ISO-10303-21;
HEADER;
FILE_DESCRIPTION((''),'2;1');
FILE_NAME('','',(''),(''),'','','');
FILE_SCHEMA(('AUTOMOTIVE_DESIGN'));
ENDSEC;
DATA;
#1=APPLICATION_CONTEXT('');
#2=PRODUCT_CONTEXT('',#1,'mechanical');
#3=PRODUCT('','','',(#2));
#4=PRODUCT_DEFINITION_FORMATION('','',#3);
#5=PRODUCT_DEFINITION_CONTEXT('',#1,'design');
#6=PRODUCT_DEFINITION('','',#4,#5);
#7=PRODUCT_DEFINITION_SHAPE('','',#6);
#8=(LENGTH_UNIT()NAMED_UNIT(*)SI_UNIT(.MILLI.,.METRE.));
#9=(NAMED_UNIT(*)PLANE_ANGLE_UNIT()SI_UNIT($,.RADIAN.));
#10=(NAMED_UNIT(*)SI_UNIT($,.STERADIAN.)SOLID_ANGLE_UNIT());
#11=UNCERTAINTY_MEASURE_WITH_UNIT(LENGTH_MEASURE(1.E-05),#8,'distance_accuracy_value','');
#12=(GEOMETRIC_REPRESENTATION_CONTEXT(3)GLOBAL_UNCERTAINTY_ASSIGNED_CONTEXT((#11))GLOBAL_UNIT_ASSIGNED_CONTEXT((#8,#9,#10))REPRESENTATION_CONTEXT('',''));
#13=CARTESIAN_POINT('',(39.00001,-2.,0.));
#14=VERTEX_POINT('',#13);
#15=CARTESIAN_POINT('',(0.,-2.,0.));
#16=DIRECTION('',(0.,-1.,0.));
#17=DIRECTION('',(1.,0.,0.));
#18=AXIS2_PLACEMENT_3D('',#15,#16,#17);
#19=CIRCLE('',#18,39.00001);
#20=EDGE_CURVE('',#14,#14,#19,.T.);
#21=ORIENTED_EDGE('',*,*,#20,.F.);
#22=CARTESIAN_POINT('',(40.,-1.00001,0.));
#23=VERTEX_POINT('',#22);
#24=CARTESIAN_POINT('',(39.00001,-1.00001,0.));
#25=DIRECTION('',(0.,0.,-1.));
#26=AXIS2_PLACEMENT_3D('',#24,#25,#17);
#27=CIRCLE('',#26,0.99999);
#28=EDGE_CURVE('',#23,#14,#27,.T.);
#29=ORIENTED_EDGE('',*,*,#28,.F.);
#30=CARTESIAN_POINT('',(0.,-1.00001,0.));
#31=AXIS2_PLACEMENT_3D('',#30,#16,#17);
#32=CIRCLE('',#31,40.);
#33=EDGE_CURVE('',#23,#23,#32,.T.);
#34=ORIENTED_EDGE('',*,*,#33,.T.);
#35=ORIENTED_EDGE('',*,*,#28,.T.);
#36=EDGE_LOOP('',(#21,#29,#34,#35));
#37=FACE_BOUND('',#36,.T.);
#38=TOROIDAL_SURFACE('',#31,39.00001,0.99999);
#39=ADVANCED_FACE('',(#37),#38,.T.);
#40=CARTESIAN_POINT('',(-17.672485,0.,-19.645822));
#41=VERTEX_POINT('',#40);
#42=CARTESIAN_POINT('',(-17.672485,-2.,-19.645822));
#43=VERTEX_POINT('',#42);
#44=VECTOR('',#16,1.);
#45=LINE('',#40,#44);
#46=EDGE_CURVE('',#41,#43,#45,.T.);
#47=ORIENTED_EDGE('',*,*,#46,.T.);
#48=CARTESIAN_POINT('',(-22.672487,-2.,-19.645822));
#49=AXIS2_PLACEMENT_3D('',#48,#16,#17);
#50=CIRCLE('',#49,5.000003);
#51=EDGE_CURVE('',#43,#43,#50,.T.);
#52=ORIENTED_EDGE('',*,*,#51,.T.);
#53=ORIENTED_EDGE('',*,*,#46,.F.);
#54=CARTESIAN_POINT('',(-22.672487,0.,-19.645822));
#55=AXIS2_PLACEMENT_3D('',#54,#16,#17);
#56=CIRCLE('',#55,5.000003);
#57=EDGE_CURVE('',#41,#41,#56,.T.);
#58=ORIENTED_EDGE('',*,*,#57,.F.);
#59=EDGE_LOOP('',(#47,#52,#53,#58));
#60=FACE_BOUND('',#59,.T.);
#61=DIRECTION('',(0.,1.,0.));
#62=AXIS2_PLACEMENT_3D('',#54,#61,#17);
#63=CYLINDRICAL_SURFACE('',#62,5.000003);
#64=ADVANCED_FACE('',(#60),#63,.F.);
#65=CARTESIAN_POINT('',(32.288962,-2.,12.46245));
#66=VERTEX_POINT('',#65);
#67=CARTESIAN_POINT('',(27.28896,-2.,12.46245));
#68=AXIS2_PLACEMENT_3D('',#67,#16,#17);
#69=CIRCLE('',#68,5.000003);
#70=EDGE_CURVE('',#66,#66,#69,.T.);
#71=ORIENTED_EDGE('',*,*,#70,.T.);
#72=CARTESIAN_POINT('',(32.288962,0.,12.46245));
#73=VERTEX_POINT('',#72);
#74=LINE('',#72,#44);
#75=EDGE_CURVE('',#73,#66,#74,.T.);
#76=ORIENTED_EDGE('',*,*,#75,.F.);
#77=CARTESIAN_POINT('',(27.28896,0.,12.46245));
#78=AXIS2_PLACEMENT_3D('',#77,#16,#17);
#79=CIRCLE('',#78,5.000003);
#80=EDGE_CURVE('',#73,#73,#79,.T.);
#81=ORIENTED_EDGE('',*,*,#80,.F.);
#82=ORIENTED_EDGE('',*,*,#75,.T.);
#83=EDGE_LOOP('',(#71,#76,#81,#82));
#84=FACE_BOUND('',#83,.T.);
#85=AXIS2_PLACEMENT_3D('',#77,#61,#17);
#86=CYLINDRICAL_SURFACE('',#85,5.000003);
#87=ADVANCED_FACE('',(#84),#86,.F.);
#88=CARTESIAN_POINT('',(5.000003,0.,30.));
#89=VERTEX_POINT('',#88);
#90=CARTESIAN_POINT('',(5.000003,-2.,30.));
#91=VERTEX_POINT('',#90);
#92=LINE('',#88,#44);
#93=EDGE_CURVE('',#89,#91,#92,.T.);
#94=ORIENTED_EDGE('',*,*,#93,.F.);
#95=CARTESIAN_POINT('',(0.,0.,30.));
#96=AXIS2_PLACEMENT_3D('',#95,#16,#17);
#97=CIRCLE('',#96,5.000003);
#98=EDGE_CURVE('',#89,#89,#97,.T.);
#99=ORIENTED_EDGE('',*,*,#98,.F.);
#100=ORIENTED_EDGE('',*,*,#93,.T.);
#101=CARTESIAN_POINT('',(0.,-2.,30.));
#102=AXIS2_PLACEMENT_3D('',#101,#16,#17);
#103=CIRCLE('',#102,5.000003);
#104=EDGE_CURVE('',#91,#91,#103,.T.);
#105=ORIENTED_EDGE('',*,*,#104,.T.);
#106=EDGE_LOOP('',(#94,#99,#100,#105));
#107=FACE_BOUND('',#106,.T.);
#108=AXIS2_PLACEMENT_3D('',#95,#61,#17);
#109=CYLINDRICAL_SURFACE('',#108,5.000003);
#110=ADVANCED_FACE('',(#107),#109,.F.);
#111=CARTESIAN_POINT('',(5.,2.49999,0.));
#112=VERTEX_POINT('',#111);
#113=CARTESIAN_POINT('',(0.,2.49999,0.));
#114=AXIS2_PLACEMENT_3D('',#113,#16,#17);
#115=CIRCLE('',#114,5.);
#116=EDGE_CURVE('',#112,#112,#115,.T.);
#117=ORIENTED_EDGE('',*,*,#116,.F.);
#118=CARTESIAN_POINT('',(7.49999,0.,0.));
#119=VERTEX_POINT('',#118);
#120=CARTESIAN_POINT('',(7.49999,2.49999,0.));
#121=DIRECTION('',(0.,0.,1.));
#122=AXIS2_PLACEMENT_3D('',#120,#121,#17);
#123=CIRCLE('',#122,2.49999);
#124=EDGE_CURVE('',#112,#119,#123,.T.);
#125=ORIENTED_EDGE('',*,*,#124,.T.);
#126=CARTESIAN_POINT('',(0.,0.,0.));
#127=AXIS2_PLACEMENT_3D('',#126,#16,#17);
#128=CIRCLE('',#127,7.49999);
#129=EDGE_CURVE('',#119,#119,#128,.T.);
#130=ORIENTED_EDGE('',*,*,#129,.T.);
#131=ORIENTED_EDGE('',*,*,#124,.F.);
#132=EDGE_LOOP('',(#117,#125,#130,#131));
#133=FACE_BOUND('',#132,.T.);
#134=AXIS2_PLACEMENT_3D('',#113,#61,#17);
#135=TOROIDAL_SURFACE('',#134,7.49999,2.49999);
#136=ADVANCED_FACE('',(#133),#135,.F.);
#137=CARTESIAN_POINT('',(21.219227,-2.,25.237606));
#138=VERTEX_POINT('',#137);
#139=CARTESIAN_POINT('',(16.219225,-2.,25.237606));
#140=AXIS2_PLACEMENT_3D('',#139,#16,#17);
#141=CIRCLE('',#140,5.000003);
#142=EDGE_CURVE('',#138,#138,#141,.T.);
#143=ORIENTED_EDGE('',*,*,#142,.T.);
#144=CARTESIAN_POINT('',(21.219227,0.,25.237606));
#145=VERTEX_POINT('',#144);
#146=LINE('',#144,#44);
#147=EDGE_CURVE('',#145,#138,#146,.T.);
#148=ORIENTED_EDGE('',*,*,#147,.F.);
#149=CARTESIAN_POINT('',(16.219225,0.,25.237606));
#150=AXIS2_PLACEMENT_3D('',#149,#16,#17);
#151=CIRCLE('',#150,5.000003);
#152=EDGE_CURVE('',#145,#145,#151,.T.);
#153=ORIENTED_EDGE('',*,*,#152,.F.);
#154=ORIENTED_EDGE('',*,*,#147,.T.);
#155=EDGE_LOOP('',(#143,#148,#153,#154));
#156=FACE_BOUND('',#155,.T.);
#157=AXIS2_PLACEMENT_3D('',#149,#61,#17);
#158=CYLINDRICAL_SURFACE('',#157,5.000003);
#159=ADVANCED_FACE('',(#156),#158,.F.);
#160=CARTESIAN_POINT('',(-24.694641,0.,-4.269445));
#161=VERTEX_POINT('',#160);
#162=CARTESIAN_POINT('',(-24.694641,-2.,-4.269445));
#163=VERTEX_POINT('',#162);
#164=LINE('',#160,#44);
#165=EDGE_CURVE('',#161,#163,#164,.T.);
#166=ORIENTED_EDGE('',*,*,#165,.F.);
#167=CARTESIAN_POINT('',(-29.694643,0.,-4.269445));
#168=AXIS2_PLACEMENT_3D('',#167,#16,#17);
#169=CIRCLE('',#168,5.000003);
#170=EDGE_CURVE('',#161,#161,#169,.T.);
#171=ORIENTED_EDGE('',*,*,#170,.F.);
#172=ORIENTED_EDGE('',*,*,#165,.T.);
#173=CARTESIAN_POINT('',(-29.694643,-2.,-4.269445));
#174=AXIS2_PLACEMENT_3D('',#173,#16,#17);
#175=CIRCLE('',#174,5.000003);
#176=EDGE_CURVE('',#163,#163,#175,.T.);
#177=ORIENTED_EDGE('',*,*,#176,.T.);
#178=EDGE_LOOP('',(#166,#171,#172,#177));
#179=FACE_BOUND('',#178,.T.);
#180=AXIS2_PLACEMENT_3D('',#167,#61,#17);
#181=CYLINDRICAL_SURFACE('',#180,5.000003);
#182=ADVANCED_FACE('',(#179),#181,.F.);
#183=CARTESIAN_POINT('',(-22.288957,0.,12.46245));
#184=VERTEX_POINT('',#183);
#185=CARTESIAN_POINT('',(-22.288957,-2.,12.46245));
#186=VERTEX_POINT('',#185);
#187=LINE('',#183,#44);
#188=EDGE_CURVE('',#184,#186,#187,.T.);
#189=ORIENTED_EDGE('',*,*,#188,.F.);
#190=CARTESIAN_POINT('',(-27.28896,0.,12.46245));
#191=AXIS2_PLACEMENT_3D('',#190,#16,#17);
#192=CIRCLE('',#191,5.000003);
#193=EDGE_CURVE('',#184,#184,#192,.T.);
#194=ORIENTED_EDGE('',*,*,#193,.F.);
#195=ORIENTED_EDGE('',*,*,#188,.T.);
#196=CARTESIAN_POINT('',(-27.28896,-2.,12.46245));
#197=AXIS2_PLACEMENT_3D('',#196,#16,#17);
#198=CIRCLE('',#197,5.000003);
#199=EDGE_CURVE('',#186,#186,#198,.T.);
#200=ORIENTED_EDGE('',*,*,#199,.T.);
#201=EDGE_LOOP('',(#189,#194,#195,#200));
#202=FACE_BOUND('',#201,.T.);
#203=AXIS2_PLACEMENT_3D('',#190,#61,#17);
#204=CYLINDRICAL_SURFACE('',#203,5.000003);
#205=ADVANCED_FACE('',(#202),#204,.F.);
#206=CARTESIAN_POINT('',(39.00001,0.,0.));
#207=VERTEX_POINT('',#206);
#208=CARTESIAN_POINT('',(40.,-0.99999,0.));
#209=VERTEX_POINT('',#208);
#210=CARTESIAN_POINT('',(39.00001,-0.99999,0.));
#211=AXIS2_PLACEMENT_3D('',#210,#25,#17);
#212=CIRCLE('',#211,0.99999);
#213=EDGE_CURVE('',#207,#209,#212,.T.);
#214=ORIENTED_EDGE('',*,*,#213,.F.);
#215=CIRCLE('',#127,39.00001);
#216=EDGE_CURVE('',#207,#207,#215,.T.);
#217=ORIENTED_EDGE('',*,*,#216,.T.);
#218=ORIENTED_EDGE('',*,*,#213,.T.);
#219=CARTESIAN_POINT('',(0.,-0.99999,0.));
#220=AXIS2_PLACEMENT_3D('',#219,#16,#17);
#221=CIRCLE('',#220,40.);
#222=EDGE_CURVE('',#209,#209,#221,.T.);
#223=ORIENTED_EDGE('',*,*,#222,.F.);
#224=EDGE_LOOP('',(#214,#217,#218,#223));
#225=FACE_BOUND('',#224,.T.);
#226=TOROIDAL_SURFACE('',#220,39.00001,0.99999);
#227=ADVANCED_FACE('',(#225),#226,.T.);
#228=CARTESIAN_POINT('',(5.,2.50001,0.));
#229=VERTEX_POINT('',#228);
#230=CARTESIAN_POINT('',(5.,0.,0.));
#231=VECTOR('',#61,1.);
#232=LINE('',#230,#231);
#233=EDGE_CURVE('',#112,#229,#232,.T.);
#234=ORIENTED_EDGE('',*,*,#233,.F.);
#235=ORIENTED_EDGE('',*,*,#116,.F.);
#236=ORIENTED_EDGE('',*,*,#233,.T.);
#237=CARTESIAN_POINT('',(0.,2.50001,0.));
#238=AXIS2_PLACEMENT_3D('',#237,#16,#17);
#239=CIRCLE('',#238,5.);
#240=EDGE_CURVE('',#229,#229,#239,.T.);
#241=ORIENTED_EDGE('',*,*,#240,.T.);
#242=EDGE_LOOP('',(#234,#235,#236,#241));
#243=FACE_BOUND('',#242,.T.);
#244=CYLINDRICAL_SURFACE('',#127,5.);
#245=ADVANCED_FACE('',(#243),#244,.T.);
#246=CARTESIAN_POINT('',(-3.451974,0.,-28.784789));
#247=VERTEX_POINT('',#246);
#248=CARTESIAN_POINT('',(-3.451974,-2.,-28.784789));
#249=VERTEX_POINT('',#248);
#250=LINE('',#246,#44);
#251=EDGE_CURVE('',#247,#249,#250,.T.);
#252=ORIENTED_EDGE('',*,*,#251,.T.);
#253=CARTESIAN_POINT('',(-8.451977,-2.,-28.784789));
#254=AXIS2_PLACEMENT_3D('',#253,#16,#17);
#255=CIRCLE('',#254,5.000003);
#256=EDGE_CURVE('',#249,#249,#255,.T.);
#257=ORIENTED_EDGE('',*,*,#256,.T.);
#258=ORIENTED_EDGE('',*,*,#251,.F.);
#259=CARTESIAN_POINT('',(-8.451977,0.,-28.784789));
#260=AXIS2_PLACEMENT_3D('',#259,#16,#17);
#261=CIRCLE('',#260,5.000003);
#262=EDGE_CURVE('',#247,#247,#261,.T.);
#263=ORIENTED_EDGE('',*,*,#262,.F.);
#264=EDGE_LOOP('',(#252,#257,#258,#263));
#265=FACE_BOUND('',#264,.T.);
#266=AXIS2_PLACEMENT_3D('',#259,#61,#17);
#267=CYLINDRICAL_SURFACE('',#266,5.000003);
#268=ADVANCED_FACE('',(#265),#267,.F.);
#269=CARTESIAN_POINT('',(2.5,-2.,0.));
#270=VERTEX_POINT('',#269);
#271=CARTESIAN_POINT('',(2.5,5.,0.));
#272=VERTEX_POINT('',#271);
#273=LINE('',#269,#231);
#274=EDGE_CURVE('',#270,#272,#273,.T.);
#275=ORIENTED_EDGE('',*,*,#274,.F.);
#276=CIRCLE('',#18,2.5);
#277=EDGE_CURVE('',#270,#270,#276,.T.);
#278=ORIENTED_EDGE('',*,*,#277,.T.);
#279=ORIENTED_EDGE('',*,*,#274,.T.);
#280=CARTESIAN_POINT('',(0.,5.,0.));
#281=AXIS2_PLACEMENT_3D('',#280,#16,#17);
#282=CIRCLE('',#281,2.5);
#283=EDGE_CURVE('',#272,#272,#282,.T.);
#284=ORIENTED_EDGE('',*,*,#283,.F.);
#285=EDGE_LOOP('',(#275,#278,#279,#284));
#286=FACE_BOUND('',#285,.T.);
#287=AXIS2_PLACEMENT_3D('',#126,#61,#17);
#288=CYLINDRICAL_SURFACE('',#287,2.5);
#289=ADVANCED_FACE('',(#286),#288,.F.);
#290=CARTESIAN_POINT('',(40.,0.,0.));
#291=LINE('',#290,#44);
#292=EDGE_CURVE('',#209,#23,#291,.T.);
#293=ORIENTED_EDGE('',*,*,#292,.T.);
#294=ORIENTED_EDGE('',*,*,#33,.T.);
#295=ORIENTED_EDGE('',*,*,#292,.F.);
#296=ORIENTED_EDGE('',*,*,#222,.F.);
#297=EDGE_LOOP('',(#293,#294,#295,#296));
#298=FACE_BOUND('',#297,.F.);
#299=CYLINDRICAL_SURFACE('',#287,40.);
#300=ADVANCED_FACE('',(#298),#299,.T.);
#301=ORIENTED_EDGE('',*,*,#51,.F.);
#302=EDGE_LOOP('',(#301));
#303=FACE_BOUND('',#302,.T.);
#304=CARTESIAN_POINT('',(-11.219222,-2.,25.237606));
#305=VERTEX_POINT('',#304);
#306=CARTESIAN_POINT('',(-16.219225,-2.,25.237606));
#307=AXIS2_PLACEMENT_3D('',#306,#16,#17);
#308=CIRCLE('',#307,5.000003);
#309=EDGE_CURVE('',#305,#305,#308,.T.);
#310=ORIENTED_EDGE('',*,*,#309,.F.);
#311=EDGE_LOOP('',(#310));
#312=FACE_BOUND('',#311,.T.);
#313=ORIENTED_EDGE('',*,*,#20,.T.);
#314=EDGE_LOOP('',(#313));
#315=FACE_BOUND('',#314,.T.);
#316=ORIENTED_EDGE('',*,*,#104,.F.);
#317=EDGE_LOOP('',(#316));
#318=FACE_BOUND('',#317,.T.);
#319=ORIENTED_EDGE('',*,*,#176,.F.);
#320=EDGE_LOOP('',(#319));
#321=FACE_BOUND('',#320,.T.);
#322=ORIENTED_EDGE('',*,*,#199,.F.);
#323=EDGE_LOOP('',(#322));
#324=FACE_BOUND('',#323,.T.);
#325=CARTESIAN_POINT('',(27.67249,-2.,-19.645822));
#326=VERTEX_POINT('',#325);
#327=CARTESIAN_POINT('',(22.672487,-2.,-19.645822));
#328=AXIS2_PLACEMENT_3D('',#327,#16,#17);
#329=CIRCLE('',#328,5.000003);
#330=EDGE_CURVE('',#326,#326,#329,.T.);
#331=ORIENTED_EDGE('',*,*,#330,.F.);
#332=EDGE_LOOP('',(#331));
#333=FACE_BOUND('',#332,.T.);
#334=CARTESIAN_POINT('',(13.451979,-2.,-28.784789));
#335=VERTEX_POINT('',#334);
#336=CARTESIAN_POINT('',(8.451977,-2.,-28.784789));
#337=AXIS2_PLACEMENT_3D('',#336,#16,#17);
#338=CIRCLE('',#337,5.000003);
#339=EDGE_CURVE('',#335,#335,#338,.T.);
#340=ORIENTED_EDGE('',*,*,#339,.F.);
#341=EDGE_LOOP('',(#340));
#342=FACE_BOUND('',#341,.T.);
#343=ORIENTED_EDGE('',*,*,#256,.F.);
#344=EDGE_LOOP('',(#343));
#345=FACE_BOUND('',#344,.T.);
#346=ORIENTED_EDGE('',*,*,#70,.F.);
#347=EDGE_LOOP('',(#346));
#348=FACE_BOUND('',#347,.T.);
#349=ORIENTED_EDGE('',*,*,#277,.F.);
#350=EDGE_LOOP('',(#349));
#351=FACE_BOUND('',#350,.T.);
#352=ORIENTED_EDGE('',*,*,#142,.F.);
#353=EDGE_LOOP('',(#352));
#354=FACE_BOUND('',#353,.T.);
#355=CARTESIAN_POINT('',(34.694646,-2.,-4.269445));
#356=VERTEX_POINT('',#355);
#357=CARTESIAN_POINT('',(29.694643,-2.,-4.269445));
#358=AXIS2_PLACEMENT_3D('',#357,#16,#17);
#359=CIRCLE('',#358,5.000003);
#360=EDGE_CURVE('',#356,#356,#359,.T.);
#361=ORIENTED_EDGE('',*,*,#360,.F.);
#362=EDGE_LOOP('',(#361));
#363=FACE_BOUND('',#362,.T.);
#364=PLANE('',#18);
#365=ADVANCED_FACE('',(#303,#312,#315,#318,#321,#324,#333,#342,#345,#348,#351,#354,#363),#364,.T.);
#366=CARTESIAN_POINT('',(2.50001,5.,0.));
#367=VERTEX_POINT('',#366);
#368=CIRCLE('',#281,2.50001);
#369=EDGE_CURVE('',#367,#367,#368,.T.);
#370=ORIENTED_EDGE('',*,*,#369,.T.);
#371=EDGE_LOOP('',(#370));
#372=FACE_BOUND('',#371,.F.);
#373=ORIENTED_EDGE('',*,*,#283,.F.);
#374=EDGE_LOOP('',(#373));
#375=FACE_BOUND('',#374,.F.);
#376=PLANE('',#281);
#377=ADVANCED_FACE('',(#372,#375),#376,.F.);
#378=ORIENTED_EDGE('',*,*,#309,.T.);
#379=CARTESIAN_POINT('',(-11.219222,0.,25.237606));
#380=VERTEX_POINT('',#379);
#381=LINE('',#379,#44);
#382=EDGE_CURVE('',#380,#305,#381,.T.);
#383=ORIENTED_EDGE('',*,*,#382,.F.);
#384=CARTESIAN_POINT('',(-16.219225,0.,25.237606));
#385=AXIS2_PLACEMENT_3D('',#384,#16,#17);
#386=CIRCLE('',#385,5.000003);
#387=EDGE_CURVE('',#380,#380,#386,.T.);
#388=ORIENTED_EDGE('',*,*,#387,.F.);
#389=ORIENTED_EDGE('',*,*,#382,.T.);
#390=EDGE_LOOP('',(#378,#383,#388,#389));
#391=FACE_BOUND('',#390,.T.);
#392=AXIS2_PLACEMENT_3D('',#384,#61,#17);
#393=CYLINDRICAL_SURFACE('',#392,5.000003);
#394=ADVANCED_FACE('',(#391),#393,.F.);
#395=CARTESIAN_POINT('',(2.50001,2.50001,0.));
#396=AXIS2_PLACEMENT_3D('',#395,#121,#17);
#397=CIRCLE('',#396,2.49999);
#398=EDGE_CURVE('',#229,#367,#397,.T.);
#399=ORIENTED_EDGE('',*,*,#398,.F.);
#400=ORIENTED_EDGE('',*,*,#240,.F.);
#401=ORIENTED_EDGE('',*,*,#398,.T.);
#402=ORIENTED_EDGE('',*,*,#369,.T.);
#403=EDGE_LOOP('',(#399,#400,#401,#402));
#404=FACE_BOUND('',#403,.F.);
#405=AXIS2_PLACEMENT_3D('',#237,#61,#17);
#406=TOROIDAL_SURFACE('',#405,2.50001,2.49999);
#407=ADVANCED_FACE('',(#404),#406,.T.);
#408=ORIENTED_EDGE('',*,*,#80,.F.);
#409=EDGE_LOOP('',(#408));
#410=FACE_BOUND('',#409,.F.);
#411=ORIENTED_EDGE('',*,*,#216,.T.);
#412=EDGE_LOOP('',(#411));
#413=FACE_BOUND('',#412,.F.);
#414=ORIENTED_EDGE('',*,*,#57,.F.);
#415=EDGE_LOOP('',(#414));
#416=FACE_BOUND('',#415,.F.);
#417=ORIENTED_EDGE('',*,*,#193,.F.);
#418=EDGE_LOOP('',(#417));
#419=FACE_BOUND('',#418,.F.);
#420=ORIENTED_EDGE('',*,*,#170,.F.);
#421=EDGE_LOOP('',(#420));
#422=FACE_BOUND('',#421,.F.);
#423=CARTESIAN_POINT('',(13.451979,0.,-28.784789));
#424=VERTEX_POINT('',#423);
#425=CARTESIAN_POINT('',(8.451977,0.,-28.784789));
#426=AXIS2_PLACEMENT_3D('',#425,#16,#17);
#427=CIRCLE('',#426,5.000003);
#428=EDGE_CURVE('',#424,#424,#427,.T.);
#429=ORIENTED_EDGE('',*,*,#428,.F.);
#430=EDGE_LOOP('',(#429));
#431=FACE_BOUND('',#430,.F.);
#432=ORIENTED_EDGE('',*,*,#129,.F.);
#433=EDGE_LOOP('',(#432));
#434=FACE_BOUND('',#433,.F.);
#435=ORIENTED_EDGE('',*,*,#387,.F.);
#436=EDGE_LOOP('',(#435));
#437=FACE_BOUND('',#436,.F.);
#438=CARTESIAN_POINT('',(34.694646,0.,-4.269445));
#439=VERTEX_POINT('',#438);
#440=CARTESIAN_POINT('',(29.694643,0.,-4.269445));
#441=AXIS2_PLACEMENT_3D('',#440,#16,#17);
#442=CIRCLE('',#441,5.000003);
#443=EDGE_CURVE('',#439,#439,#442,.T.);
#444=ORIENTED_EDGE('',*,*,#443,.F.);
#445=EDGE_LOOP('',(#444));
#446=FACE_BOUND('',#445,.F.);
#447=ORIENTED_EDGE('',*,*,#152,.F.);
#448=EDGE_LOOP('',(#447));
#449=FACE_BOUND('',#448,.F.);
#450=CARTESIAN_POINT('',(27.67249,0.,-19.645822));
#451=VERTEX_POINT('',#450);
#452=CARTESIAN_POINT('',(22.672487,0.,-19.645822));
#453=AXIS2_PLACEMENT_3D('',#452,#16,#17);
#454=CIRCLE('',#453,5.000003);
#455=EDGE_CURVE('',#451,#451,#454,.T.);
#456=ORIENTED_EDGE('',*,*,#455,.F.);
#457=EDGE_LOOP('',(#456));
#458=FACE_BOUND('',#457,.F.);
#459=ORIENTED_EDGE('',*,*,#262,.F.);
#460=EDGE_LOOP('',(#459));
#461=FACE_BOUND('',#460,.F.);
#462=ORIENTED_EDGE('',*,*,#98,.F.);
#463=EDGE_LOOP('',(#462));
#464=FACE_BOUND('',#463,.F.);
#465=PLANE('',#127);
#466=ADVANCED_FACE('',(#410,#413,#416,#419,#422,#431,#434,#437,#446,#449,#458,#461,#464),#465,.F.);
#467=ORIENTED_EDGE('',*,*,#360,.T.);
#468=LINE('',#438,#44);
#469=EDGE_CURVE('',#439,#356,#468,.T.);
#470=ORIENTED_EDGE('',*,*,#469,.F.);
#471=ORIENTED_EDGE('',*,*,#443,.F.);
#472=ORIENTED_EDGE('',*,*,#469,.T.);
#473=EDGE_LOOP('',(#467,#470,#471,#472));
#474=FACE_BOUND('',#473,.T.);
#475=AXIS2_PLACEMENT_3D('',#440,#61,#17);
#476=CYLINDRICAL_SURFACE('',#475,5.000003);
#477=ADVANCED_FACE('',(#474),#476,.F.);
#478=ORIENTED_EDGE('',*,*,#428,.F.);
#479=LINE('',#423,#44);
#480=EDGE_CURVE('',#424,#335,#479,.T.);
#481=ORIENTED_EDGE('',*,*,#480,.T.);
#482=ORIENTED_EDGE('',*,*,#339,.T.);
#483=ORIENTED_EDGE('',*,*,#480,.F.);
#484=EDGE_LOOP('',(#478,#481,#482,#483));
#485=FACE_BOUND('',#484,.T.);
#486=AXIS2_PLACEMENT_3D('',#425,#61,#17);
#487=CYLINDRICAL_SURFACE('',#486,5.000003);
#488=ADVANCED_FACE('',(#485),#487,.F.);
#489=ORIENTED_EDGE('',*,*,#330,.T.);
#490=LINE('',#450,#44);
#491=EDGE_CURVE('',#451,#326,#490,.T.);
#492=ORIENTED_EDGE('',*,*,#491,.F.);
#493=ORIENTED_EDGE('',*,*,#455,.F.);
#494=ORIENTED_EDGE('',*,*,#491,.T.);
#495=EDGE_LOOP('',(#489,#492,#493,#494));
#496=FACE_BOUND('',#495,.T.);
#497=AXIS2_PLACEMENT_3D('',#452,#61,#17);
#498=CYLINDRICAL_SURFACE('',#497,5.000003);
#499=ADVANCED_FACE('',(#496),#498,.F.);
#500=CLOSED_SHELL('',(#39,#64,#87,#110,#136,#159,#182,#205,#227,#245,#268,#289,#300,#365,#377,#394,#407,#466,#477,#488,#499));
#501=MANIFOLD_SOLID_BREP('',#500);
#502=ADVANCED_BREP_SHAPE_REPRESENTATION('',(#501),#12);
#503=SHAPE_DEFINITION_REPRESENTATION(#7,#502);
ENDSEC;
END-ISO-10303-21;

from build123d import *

# Parameters (mm, degrees)
F0_R     = 40
F0_R_2   = 5.0000025111
F0_R_3   = 2.5
F1_DEPTH = 2
F2_R     = 5
F2_R_2   = 2.5
F3_DEPTH = 5
F4_R     = 2.49999
F5_R     = 0.99999


# Not quite as in the source:
# - a fillet or chamfer is up to 0.001 mm smaller than in the source, because OpenCascade refuses the exact size


with BuildPart() as f1:
    # F0 (on Front) → F1 (new body)
    with BuildSketch(Plane.XZ):
        Circle(F0_R)
        with Locations((-8.4519767052, -28.7847892084)):
            Circle(F0_R_2, mode=Mode.SUBTRACT)
        with Locations((-22.6724872306, -19.6458220184)):
            Circle(F0_R_2, mode=Mode.SUBTRACT)
        with Locations((-29.6946432564, -4.2694451482)):
            Circle(F0_R_2, mode=Mode.SUBTRACT)
        with Locations((8.4519767052, -28.7847892084)):
            Circle(F0_R_2, mode=Mode.SUBTRACT)
        with Locations((22.6724872306, -19.6458220184)):
            Circle(F0_R_2, mode=Mode.SUBTRACT)
        with Locations((29.6946432564, -4.2694451482)):
            Circle(F0_R_2, mode=Mode.SUBTRACT)
        with Locations((-27.2889598606, 12.4624503901)):
            Circle(F0_R_2, mode=Mode.SUBTRACT)
        with Locations((-16.2192245237, 25.2376059849)):
            Circle(F0_R_2, mode=Mode.SUBTRACT)
        Circle(F0_R_3, mode=Mode.SUBTRACT)
        with Locations((27.2889598606, 12.4624503901)):
            Circle(F0_R_2, mode=Mode.SUBTRACT)
        with Locations((16.2192245237, 25.2376059849)):
            Circle(F0_R_2, mode=Mode.SUBTRACT)
        with Locations((0, 30)):
            Circle(F0_R_2, mode=Mode.SUBTRACT)
    extrude(amount=F1_DEPTH)

    # F2 (on Front) → F3 (join)
    with BuildSketch(Plane.XZ):
        Circle(F2_R)
        Circle(F2_R_2, mode=Mode.SUBTRACT)
    extrude(amount=-F3_DEPTH)

    # F4 (radius 2.5 in the source; OpenCascade refuses exactly that, so slightly less here)
    f4_edges = [f1.edges().sort_by_distance(p)[0] for p in [
        (-5, 0, 0),
        (-5, 5, 0),
    ]]
    fillet(f4_edges, radius=F4_R)

    # F5 (radius 1 in the source; OpenCascade refuses exactly that, so slightly less here)
    f5_edges = [f1.edges().sort_by_distance(p)[0] for p in [
        (40, -1, 0),
        (-40, 0, 0),
        (-40, -2, 0),
    ]]
    fillet(f5_edges, radius=F5_R)


solid = f1.part
